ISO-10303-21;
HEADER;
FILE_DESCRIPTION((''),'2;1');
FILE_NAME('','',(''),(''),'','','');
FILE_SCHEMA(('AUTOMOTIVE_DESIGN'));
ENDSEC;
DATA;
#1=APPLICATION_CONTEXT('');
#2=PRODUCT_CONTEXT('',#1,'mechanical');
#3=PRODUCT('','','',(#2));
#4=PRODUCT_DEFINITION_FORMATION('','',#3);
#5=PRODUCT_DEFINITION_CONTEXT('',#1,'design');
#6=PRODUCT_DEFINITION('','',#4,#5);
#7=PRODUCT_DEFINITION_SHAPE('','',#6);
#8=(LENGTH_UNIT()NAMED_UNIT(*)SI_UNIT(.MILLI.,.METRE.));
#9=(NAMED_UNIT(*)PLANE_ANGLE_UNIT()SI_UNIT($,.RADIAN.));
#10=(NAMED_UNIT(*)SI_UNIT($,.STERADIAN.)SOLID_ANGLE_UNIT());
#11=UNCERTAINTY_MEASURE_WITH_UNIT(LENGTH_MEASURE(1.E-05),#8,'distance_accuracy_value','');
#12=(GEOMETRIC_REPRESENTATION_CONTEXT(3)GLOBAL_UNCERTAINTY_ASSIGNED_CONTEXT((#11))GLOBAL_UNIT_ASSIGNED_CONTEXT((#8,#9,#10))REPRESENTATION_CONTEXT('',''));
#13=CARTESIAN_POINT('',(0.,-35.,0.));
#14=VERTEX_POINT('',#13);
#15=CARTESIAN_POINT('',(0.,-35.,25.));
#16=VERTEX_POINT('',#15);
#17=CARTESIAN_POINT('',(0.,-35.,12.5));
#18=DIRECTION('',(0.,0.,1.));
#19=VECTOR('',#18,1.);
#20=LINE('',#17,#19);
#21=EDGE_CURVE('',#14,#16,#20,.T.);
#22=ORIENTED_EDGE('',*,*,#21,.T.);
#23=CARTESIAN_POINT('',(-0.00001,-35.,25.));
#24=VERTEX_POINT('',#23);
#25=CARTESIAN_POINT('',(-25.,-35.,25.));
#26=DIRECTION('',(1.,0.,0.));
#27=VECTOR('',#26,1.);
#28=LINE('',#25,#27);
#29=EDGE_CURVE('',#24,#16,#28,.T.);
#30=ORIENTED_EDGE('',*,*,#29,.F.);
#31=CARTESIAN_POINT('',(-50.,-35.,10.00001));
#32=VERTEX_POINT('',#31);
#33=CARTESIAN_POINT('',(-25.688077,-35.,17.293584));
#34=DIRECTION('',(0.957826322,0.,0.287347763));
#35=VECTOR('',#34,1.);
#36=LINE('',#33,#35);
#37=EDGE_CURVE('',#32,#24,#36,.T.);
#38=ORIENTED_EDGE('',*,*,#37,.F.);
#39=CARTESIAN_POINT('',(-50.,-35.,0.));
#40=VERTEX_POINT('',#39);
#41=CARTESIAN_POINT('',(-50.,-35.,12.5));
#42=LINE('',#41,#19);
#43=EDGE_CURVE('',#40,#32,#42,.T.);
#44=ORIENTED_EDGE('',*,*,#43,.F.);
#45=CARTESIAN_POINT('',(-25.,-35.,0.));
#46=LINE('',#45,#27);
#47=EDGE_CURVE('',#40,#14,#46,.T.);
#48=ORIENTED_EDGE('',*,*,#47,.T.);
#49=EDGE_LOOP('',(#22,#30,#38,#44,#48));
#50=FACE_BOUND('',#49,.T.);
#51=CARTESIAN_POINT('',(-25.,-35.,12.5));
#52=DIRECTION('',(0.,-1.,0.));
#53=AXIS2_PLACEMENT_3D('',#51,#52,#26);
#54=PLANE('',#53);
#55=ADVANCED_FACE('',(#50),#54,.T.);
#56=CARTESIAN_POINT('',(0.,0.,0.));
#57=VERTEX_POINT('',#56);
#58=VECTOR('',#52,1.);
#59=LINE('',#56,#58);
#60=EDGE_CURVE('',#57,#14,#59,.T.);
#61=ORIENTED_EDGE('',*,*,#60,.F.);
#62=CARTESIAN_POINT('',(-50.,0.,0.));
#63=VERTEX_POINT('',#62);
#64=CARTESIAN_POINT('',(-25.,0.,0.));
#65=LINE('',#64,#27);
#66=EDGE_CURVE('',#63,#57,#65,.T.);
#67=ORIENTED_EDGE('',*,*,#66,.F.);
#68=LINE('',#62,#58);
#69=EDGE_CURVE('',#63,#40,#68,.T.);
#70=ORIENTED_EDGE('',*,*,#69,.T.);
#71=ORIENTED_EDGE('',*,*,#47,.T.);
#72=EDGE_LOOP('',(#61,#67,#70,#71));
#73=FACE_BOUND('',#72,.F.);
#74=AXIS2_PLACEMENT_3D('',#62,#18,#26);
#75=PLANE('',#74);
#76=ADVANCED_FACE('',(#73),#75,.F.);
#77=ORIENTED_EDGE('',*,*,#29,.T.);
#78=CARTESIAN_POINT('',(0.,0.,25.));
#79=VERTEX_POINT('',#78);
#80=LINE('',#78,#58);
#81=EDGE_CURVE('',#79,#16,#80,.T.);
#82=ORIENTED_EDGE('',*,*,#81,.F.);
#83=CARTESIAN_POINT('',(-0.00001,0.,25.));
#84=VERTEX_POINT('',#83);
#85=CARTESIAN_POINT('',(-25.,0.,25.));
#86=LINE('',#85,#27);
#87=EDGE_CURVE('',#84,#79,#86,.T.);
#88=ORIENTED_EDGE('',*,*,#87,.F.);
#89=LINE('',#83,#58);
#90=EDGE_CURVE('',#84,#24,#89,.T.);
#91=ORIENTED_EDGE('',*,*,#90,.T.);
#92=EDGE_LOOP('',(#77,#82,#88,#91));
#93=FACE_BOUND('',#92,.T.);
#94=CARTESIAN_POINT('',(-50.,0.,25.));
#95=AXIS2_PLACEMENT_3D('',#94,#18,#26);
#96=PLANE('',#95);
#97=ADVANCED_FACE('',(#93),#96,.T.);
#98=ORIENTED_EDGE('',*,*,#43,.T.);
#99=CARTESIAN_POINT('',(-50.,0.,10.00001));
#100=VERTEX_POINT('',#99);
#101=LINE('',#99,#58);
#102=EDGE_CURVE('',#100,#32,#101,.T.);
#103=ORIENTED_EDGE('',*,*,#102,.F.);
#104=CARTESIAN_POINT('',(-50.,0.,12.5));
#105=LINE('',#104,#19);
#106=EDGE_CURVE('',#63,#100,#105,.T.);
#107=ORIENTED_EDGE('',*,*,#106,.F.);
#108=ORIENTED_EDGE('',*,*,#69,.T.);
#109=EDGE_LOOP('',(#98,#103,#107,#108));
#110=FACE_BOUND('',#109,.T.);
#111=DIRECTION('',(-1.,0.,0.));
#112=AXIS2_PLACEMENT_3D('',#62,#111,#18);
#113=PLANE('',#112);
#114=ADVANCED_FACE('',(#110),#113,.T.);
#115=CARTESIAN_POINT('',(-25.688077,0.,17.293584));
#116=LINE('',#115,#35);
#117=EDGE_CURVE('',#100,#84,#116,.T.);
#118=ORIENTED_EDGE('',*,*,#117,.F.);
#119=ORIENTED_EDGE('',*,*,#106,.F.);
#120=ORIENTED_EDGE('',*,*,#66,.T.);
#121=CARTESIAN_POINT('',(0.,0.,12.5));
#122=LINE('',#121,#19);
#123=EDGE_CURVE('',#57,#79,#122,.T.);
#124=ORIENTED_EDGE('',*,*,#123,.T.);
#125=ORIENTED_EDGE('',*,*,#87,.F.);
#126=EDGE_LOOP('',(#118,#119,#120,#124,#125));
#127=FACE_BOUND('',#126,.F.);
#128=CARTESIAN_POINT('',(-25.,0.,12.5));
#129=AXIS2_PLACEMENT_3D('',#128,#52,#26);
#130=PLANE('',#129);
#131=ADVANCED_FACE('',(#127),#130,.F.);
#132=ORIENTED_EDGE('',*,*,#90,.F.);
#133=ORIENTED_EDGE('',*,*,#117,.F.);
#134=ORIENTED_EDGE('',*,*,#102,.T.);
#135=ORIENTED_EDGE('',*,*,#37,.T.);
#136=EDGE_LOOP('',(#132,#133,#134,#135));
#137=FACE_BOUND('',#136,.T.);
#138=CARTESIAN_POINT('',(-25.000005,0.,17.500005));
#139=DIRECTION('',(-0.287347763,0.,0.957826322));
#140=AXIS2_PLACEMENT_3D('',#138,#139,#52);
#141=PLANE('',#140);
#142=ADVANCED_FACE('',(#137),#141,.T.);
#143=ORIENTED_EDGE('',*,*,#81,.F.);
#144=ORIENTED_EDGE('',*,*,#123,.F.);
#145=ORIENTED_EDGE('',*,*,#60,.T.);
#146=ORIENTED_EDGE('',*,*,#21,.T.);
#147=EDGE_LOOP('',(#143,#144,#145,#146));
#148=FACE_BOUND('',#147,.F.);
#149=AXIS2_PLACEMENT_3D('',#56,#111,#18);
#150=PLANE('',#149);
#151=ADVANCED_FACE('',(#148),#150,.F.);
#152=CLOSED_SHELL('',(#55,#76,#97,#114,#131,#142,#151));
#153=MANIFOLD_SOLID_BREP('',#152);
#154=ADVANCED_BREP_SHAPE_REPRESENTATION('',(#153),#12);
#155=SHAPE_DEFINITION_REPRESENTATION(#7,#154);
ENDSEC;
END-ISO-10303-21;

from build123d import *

# Parameters (mm, degrees)
F0_W     = 50
F0_H     = 25
F1_DEPTH = 35
F2_SIZE2 = 49.99999
F2_SIZE  = 14.99999


# Not quite as in the source:
# - a fillet or chamfer is up to 0.001 mm smaller than in the source, because OpenCascade refuses the exact size


with BuildPart() as f1:
    # F0 (on Front) → F1 (new body)
    with BuildSketch(Plane.XZ):
        with Locations((-25, 12.5)):
            Rectangle(F0_W, F0_H)
    extrude(amount=F1_DEPTH)

    # F2 (size 15 and 50 in the source; OpenCascade refuses exactly that, so slightly less here)
    f2_edges = [f1.edges().sort_by_distance(p)[0] for p in [
        (-50, -17.5, 25),
    ]]
    f2_side = f1.faces().sort_by_distance((-50, -17.5, 12.5))[0]
    chamfer(f2_edges, length=F2_SIZE, length2=F2_SIZE2, reference=f2_side)


solid = f1.part
